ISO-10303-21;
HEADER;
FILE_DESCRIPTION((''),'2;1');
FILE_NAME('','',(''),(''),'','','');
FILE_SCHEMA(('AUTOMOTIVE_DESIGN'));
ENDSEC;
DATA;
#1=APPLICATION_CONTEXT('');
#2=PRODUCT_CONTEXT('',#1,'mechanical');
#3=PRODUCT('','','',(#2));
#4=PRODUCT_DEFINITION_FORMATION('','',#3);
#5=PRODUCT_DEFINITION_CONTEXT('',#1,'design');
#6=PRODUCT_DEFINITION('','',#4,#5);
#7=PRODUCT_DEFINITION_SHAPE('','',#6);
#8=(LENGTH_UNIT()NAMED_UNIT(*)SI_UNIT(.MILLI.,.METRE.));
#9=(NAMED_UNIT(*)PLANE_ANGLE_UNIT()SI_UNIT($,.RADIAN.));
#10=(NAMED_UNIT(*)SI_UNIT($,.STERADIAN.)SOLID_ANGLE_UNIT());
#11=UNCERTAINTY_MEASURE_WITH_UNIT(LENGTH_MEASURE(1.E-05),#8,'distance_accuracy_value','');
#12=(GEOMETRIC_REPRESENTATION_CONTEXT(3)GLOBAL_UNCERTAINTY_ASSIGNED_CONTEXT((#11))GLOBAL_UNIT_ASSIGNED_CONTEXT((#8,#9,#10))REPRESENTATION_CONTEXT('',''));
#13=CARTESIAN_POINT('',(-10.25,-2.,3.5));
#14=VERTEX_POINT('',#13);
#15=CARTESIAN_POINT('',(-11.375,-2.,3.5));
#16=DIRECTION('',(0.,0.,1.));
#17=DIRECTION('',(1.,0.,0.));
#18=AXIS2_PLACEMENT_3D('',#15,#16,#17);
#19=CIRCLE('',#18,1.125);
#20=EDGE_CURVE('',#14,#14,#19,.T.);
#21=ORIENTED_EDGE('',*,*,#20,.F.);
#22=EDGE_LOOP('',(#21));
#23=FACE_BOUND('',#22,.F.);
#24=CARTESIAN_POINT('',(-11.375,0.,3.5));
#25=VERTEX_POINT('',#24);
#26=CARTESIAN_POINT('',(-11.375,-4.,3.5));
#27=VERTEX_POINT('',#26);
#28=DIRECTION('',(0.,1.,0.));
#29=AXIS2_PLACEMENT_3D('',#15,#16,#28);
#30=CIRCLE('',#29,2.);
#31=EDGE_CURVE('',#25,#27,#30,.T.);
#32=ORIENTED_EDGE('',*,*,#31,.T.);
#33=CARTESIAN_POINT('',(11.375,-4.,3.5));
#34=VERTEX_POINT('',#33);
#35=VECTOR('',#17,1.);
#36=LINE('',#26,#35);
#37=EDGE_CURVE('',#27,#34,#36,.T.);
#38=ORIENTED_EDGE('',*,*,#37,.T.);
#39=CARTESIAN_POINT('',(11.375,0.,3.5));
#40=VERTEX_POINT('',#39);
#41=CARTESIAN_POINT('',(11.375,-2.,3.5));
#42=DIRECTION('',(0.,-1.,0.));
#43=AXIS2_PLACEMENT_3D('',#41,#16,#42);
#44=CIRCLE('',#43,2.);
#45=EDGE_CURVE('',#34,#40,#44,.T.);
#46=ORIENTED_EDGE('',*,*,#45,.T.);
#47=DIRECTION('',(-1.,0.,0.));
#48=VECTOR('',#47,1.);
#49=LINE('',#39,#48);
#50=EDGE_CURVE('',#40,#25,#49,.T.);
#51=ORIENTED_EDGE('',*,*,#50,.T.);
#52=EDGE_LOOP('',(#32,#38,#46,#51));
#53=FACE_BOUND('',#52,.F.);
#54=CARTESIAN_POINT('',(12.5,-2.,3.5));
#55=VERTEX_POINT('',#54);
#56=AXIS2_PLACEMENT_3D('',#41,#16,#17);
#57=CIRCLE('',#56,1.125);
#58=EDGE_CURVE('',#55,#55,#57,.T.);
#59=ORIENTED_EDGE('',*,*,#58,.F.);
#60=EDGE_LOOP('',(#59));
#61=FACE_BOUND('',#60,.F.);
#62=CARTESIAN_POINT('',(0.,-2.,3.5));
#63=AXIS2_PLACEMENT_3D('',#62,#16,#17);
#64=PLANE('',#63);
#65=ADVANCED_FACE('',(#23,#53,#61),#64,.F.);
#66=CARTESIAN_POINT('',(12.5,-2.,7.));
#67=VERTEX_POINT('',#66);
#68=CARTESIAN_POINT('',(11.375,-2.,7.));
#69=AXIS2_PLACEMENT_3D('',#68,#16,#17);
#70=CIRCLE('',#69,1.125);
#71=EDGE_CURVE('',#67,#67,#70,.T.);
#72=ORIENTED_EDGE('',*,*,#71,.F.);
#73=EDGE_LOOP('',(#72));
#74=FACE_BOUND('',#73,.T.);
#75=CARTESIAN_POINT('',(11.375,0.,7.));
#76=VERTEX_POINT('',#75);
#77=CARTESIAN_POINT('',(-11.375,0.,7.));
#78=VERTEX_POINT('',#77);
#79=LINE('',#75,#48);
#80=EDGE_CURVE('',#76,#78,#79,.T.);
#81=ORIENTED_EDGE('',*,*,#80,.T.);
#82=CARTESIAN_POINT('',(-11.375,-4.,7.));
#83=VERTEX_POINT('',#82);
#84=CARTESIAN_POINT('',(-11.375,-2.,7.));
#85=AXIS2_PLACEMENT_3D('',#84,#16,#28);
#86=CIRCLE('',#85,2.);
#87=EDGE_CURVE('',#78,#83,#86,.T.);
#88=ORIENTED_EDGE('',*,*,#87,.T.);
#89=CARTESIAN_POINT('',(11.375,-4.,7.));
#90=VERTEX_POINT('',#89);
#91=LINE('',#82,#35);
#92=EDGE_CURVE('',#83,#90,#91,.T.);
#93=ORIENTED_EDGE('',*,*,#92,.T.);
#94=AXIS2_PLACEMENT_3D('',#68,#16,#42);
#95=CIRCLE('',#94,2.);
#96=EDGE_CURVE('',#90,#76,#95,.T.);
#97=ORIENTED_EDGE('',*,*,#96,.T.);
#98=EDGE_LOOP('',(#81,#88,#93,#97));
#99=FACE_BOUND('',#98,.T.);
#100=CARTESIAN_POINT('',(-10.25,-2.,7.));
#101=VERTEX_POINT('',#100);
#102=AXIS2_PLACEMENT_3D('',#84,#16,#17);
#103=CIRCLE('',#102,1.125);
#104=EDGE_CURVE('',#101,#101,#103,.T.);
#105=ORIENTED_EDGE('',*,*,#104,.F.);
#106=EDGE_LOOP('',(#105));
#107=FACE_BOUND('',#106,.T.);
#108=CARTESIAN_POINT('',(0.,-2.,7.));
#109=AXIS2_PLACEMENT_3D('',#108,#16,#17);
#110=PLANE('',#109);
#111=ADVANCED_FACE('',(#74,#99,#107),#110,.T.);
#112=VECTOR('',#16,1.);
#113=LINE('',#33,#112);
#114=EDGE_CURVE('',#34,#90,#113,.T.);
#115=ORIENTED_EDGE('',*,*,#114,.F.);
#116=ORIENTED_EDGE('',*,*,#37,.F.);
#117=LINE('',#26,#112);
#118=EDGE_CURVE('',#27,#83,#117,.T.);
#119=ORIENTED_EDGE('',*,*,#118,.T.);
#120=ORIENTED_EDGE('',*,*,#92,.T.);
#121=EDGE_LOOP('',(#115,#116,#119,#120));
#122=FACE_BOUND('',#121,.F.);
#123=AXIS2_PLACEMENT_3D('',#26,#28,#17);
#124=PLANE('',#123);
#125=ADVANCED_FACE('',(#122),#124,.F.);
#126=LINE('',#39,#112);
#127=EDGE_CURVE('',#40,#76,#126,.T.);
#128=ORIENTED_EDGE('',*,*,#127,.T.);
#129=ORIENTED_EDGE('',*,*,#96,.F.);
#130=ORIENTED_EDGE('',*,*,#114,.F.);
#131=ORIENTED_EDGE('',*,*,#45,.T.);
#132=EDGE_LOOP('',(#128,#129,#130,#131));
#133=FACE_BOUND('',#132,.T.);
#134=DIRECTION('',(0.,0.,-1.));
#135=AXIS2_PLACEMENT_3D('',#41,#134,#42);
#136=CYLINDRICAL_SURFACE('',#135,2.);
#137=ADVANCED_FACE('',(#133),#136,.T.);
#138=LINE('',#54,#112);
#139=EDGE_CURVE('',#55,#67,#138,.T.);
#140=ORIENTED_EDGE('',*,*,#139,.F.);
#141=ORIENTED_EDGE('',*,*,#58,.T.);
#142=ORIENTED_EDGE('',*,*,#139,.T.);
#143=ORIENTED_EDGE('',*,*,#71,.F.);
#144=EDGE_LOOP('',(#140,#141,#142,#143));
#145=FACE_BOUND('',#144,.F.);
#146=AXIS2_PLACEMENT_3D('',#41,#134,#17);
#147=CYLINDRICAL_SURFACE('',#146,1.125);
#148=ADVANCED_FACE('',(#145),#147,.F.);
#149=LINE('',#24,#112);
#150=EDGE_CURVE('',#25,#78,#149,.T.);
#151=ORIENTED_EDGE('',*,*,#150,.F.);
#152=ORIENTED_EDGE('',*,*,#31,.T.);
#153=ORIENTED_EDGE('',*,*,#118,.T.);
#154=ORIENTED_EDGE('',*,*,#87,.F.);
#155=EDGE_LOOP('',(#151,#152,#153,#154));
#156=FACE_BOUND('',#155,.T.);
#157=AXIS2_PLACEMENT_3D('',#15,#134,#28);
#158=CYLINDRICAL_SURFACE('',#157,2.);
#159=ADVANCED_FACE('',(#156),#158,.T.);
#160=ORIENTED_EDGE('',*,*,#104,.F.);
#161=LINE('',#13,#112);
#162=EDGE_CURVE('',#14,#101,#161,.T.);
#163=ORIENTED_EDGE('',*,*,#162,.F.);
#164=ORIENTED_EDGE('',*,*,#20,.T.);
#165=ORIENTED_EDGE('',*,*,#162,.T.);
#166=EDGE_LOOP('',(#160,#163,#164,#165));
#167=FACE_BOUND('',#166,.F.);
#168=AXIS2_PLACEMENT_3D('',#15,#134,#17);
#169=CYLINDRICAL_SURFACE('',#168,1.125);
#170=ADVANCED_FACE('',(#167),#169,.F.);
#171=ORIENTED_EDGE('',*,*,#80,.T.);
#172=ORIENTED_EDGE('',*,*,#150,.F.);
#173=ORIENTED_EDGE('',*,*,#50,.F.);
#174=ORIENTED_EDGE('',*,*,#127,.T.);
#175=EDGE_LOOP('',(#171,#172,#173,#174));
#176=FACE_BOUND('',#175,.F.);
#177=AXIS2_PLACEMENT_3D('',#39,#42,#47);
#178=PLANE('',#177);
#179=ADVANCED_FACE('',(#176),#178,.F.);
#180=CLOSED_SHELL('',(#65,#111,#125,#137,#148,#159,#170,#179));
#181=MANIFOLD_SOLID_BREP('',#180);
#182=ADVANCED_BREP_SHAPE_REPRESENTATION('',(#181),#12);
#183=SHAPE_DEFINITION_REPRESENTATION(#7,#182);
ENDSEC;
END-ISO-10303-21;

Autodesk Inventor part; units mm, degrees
ref_plane "YZ Plane" through (0, 0, 0) normal (1, 0, 0) x (0, 1, 0)
ref_plane "XZ Plane" through (0, 0, 0) normal (0, 1, 0) x (-1, 0, 0)
ref_plane "XY Plane" through (0, 0, 0) normal (0, 0, 1) x (1, 0, 0)
sketch "Sketch1" plane through (0, 0, 0) normal (0, 0, 1) x (1, 0, 0)
  circle A0 centre (-22.75, 0) radius 2.25 projected
  circle A1 centre (22.75, 0) radius 2.25 projected
  line L0 (-22.75, 0) -> (22.75, 0) construction
  line L1 (-22.75, -4) -> (22.75, -4)
  line L2 (22.75, 4) -> (-22.75, 4)
  arc A2 (-22.75, 4) -> (-22.75, -4) centre (-22.75, 0) ccw
  arc A3 (22.75, -4) -> (22.75, 4) centre (22.75, 0) ccw
  point P0 (0, 0)
  point P1 (0, 0)
  dimension "d0" = 8
extrude "Extrusion1" add sketch "Sketch1" along normal blind 7
scale "Scale1" factors (0.5, 0.5, 0.5) then translate (0, -2, 3.5) bodies 1
properties part number "MassiveToe1"
